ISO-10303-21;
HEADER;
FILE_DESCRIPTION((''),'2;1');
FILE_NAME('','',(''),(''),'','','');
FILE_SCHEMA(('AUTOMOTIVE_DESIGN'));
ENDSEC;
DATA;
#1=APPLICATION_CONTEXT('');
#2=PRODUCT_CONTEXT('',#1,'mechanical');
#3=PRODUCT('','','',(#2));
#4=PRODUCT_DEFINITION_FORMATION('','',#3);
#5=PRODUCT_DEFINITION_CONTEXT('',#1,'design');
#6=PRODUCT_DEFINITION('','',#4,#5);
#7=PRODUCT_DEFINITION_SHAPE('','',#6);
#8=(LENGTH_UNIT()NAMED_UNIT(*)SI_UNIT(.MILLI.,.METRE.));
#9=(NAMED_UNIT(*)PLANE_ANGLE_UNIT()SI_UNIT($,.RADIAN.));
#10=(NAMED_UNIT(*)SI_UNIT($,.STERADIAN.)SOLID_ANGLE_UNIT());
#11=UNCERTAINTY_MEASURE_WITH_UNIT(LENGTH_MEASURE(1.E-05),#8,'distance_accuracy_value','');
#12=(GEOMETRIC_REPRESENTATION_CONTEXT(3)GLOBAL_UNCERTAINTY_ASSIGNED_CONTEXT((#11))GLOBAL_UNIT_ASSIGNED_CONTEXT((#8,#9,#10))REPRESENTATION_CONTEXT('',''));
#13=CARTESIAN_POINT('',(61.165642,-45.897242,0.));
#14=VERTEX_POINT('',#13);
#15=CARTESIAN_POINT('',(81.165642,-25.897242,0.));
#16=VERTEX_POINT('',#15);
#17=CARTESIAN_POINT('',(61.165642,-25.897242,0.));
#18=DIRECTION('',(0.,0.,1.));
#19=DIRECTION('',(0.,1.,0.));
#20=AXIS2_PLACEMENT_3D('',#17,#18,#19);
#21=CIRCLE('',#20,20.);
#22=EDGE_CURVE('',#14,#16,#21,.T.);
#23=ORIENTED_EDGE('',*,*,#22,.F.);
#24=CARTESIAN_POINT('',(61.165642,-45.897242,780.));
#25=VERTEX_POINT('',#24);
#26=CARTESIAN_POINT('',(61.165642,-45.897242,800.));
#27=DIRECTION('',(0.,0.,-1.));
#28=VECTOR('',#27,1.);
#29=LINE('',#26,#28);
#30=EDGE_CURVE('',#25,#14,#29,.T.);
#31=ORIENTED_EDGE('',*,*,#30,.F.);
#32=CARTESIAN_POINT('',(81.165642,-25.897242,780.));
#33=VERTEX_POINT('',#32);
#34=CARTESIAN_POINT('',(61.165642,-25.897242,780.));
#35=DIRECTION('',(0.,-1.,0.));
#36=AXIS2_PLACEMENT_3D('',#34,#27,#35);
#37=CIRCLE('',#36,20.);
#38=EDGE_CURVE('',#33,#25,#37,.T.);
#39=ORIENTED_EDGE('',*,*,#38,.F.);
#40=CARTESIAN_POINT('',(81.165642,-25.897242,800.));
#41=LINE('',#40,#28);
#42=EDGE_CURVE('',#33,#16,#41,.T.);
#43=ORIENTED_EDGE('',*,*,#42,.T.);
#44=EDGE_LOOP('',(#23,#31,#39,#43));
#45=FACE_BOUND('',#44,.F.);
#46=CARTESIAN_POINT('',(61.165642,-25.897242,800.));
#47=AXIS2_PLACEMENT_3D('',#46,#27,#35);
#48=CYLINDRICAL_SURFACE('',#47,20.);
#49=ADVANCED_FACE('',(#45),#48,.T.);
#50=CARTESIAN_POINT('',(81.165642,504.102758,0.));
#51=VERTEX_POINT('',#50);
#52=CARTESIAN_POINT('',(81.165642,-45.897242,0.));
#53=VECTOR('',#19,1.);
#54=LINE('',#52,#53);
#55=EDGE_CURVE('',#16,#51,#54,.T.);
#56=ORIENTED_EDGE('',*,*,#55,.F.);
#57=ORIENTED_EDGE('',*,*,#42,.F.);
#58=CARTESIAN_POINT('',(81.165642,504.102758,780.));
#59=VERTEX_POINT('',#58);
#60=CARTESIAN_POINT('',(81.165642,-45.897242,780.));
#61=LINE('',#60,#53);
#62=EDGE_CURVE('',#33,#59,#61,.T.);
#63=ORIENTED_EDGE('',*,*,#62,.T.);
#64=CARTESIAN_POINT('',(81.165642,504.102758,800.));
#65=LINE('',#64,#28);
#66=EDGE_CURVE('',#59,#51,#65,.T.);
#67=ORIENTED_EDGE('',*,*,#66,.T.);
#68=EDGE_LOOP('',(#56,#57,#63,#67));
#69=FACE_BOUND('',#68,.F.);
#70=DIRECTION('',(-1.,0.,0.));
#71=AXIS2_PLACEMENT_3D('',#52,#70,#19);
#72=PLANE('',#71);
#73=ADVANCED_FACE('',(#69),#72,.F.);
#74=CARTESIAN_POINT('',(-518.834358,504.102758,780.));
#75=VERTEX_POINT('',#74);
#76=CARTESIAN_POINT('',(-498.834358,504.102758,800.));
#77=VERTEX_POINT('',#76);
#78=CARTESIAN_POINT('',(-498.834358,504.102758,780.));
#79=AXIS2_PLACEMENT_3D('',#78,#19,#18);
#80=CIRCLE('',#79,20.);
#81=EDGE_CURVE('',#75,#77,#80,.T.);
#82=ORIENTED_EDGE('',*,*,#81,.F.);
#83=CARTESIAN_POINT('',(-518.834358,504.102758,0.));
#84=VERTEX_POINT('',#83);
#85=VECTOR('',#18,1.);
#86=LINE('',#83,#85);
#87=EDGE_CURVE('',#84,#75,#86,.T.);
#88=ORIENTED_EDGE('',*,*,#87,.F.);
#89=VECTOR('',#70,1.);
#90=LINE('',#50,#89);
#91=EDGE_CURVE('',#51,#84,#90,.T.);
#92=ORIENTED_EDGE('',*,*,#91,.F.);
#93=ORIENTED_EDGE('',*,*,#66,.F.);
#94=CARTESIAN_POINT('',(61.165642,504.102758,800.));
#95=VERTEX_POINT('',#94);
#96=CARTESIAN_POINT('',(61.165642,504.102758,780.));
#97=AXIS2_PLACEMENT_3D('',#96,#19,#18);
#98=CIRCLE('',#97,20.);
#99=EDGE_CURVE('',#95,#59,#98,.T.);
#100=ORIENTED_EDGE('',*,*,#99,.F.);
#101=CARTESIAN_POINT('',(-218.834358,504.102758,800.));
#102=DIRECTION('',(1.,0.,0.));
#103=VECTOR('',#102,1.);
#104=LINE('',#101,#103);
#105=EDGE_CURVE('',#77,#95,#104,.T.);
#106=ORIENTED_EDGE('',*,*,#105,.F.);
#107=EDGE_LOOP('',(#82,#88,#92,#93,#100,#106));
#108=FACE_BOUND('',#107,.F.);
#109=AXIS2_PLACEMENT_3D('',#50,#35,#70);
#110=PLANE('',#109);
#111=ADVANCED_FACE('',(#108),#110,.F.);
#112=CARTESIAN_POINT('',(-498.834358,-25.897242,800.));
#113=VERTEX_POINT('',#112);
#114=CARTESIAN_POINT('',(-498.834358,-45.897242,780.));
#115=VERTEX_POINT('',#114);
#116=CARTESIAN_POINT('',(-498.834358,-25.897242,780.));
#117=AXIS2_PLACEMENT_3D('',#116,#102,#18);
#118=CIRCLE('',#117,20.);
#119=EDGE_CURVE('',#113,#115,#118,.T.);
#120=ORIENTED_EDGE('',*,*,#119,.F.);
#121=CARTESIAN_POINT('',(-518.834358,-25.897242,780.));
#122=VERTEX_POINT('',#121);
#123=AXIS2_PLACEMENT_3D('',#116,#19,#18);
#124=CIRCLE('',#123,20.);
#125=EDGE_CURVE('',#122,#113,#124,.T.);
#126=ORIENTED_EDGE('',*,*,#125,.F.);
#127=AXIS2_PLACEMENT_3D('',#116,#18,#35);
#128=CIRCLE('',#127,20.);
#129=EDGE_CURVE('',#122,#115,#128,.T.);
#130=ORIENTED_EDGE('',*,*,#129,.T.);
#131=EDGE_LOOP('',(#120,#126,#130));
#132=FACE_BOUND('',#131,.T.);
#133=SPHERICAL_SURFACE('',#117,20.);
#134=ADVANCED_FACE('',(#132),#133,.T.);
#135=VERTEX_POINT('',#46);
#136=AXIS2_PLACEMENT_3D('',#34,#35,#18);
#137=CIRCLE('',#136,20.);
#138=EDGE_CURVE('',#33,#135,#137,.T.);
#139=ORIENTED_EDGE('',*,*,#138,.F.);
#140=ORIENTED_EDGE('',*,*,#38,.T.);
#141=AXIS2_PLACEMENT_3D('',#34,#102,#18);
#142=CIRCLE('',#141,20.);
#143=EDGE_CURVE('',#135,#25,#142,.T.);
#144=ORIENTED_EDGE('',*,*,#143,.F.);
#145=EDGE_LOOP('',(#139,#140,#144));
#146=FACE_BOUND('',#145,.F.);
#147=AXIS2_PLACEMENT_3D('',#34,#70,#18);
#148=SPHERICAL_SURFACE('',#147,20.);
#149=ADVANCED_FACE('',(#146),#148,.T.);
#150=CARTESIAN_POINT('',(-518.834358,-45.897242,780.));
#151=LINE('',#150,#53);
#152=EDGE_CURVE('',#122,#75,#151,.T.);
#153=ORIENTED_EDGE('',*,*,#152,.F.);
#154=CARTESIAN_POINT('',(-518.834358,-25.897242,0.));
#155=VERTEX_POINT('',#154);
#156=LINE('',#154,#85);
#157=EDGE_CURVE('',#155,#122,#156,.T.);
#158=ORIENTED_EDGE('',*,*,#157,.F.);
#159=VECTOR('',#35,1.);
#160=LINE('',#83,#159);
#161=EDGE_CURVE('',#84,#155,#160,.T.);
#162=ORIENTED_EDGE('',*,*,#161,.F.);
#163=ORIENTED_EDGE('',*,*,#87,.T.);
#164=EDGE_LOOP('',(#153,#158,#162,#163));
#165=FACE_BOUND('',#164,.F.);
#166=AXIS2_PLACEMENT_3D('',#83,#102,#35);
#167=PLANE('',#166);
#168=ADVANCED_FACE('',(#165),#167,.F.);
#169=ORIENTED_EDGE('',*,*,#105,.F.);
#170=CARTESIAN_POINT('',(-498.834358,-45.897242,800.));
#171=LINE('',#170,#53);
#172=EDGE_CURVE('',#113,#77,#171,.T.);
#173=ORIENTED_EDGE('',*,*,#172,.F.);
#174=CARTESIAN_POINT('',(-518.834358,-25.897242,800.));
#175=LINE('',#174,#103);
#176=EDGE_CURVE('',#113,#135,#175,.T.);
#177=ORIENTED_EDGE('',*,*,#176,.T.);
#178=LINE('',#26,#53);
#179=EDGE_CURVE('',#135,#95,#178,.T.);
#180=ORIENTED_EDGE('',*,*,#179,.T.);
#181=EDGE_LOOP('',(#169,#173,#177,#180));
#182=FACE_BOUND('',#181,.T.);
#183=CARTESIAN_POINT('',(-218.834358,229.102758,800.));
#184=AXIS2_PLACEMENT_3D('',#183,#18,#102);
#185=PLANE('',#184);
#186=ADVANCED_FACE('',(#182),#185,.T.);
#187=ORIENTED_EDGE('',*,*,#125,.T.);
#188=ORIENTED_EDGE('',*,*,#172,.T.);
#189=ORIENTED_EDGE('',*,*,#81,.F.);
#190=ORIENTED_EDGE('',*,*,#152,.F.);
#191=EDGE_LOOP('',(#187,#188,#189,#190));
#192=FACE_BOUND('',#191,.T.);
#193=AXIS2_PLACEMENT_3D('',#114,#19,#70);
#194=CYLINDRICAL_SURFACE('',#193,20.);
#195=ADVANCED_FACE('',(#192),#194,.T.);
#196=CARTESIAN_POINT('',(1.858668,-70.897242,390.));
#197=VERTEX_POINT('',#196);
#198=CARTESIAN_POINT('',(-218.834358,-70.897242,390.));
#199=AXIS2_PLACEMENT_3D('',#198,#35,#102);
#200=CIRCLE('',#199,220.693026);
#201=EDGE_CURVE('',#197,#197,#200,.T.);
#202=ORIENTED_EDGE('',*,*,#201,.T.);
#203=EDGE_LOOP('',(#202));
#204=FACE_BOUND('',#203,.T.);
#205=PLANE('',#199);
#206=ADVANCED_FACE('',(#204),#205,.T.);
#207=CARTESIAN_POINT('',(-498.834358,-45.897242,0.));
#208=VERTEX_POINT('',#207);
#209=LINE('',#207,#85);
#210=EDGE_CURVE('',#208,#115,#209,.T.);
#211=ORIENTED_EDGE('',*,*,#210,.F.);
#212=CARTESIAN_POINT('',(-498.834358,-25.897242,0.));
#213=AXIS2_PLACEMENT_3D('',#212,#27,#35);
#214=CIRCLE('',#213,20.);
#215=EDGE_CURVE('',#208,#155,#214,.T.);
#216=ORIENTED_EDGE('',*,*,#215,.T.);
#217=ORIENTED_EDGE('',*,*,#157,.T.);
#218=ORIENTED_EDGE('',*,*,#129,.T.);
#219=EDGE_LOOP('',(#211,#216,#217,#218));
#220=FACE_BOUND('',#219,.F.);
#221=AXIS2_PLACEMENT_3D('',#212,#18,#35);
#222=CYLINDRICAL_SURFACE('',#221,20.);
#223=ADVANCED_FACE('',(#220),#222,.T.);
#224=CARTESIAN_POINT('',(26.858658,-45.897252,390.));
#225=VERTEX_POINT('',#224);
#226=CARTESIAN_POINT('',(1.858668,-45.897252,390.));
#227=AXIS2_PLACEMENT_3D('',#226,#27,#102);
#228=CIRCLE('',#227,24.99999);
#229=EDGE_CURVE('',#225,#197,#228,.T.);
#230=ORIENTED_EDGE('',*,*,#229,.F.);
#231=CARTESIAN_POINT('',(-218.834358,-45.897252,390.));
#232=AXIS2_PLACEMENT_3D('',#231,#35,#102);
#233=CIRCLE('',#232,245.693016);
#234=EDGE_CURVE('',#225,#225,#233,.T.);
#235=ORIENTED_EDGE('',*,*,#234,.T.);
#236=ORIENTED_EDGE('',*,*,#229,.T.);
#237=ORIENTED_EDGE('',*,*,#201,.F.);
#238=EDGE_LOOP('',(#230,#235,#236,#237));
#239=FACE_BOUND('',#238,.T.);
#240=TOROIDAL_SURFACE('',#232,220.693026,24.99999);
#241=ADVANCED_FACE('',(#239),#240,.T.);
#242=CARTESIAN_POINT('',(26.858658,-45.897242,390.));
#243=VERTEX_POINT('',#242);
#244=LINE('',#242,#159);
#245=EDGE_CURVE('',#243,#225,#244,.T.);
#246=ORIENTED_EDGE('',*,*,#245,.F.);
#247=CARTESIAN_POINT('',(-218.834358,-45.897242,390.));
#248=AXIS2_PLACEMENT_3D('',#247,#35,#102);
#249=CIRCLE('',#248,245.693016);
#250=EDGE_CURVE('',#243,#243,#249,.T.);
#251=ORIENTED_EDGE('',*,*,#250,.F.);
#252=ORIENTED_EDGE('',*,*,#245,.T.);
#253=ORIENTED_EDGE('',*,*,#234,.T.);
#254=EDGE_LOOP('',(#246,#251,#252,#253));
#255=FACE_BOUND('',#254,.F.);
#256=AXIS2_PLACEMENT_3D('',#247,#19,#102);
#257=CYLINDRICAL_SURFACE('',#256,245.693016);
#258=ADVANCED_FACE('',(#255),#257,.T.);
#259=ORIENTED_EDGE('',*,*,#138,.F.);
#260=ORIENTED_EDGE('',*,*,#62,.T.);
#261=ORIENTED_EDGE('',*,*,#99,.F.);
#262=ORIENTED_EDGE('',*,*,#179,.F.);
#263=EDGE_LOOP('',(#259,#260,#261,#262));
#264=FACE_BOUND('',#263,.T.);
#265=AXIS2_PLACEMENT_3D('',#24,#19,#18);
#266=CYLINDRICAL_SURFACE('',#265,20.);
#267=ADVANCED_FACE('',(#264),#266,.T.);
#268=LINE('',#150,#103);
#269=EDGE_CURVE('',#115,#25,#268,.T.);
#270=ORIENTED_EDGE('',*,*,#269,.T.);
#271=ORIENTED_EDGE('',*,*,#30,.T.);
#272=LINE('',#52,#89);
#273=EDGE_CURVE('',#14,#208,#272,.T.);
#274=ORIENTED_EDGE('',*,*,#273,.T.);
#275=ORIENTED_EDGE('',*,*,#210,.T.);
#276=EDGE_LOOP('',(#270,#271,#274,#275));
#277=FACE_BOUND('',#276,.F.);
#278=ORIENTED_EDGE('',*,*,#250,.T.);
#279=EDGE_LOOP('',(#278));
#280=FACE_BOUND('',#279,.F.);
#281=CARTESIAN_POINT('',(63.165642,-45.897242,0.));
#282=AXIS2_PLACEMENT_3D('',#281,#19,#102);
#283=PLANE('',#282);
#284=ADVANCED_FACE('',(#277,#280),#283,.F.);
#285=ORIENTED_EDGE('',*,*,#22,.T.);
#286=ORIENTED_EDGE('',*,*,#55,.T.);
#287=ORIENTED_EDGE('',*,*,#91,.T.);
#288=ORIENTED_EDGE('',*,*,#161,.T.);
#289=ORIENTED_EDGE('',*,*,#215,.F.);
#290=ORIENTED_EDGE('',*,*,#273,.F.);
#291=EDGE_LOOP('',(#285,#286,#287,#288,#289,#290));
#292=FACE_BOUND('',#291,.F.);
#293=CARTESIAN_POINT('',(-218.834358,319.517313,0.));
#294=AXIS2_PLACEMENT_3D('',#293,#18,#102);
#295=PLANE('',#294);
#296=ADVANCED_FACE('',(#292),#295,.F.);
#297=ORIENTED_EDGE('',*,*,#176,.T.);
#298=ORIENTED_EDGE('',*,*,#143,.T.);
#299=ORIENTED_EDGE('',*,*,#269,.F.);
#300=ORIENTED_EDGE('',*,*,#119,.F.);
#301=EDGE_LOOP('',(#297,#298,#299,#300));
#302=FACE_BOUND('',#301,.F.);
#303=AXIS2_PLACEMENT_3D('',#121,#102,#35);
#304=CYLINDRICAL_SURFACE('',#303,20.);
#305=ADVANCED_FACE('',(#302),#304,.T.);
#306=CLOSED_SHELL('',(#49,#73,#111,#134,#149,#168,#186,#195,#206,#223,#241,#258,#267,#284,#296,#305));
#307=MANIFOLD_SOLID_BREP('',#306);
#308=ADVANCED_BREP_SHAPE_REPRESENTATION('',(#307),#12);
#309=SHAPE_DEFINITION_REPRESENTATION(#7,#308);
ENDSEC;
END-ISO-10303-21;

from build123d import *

# Parameters (mm, degrees)
F2_DEPTH = 700
F1_W     = 600
F1_H     = 550
F3_DEPTH = 800
F4_R     = 20
F5_R     = 245.6930164014
F6_DEPTH = 25
F7_R     = 24.99999


# Not quite as in the source:
# - a fillet or chamfer is up to 0.001 mm smaller than in the source, because OpenCascade refuses the exact size


with BuildPart() as f2:
    # F0 (on Top) → F2 (new body)
    with BuildSketch(Plane.XY):
        Polygon((81.1656415462, 504.1027583182), (-518.8343584538, 504.1027583182), (-518.8343584538, -45.8972416818), (-500.8343584538, -45.8972416818), (-500.8343584538, 501.1027583182), (63.1656415462, 501.1027583182), (63.1656415462, -45.8972416818), (81.1656415462, -45.8972416818), align=None)
    extrude(amount=F2_DEPTH)

    # F1 (on Top) → F3 (join)
    with BuildSketch(Plane.XY):
        with Locations((-218.8343584538, 229.1027583182)):
            Rectangle(F1_W, F1_H)
    extrude(amount=F3_DEPTH)

    # F4
    f4_edges = [f2.edges().sort_by_distance(p)[0] for p in [
        (-218.834358, -45.897242, 800),
        (81.165642, 229.102758, 800),
        (-518.834358, 229.102758, 800),
        (81.165642, -45.897242, 400),
        (-518.834358, -45.897242, 400),
    ]]
    fillet(f4_edges, radius=F4_R)

    # F5 (on face) → F6 (join)
    with BuildSketch(Plane.XZ.offset(45.8972416818)):
        with Locations((-218.8343584538, 390)):
            Circle(F5_R)
    extrude(amount=F6_DEPTH)

    # F7 (radius 25 in the source; OpenCascade refuses exactly that, so slightly less here)
    f7_edges = [f2.edges().sort_by_distance(p)[0] for p in [
        (-464.527375, -70.897242, 390),
    ]]
    fillet(f7_edges, radius=F7_R)


solid = f2.part
